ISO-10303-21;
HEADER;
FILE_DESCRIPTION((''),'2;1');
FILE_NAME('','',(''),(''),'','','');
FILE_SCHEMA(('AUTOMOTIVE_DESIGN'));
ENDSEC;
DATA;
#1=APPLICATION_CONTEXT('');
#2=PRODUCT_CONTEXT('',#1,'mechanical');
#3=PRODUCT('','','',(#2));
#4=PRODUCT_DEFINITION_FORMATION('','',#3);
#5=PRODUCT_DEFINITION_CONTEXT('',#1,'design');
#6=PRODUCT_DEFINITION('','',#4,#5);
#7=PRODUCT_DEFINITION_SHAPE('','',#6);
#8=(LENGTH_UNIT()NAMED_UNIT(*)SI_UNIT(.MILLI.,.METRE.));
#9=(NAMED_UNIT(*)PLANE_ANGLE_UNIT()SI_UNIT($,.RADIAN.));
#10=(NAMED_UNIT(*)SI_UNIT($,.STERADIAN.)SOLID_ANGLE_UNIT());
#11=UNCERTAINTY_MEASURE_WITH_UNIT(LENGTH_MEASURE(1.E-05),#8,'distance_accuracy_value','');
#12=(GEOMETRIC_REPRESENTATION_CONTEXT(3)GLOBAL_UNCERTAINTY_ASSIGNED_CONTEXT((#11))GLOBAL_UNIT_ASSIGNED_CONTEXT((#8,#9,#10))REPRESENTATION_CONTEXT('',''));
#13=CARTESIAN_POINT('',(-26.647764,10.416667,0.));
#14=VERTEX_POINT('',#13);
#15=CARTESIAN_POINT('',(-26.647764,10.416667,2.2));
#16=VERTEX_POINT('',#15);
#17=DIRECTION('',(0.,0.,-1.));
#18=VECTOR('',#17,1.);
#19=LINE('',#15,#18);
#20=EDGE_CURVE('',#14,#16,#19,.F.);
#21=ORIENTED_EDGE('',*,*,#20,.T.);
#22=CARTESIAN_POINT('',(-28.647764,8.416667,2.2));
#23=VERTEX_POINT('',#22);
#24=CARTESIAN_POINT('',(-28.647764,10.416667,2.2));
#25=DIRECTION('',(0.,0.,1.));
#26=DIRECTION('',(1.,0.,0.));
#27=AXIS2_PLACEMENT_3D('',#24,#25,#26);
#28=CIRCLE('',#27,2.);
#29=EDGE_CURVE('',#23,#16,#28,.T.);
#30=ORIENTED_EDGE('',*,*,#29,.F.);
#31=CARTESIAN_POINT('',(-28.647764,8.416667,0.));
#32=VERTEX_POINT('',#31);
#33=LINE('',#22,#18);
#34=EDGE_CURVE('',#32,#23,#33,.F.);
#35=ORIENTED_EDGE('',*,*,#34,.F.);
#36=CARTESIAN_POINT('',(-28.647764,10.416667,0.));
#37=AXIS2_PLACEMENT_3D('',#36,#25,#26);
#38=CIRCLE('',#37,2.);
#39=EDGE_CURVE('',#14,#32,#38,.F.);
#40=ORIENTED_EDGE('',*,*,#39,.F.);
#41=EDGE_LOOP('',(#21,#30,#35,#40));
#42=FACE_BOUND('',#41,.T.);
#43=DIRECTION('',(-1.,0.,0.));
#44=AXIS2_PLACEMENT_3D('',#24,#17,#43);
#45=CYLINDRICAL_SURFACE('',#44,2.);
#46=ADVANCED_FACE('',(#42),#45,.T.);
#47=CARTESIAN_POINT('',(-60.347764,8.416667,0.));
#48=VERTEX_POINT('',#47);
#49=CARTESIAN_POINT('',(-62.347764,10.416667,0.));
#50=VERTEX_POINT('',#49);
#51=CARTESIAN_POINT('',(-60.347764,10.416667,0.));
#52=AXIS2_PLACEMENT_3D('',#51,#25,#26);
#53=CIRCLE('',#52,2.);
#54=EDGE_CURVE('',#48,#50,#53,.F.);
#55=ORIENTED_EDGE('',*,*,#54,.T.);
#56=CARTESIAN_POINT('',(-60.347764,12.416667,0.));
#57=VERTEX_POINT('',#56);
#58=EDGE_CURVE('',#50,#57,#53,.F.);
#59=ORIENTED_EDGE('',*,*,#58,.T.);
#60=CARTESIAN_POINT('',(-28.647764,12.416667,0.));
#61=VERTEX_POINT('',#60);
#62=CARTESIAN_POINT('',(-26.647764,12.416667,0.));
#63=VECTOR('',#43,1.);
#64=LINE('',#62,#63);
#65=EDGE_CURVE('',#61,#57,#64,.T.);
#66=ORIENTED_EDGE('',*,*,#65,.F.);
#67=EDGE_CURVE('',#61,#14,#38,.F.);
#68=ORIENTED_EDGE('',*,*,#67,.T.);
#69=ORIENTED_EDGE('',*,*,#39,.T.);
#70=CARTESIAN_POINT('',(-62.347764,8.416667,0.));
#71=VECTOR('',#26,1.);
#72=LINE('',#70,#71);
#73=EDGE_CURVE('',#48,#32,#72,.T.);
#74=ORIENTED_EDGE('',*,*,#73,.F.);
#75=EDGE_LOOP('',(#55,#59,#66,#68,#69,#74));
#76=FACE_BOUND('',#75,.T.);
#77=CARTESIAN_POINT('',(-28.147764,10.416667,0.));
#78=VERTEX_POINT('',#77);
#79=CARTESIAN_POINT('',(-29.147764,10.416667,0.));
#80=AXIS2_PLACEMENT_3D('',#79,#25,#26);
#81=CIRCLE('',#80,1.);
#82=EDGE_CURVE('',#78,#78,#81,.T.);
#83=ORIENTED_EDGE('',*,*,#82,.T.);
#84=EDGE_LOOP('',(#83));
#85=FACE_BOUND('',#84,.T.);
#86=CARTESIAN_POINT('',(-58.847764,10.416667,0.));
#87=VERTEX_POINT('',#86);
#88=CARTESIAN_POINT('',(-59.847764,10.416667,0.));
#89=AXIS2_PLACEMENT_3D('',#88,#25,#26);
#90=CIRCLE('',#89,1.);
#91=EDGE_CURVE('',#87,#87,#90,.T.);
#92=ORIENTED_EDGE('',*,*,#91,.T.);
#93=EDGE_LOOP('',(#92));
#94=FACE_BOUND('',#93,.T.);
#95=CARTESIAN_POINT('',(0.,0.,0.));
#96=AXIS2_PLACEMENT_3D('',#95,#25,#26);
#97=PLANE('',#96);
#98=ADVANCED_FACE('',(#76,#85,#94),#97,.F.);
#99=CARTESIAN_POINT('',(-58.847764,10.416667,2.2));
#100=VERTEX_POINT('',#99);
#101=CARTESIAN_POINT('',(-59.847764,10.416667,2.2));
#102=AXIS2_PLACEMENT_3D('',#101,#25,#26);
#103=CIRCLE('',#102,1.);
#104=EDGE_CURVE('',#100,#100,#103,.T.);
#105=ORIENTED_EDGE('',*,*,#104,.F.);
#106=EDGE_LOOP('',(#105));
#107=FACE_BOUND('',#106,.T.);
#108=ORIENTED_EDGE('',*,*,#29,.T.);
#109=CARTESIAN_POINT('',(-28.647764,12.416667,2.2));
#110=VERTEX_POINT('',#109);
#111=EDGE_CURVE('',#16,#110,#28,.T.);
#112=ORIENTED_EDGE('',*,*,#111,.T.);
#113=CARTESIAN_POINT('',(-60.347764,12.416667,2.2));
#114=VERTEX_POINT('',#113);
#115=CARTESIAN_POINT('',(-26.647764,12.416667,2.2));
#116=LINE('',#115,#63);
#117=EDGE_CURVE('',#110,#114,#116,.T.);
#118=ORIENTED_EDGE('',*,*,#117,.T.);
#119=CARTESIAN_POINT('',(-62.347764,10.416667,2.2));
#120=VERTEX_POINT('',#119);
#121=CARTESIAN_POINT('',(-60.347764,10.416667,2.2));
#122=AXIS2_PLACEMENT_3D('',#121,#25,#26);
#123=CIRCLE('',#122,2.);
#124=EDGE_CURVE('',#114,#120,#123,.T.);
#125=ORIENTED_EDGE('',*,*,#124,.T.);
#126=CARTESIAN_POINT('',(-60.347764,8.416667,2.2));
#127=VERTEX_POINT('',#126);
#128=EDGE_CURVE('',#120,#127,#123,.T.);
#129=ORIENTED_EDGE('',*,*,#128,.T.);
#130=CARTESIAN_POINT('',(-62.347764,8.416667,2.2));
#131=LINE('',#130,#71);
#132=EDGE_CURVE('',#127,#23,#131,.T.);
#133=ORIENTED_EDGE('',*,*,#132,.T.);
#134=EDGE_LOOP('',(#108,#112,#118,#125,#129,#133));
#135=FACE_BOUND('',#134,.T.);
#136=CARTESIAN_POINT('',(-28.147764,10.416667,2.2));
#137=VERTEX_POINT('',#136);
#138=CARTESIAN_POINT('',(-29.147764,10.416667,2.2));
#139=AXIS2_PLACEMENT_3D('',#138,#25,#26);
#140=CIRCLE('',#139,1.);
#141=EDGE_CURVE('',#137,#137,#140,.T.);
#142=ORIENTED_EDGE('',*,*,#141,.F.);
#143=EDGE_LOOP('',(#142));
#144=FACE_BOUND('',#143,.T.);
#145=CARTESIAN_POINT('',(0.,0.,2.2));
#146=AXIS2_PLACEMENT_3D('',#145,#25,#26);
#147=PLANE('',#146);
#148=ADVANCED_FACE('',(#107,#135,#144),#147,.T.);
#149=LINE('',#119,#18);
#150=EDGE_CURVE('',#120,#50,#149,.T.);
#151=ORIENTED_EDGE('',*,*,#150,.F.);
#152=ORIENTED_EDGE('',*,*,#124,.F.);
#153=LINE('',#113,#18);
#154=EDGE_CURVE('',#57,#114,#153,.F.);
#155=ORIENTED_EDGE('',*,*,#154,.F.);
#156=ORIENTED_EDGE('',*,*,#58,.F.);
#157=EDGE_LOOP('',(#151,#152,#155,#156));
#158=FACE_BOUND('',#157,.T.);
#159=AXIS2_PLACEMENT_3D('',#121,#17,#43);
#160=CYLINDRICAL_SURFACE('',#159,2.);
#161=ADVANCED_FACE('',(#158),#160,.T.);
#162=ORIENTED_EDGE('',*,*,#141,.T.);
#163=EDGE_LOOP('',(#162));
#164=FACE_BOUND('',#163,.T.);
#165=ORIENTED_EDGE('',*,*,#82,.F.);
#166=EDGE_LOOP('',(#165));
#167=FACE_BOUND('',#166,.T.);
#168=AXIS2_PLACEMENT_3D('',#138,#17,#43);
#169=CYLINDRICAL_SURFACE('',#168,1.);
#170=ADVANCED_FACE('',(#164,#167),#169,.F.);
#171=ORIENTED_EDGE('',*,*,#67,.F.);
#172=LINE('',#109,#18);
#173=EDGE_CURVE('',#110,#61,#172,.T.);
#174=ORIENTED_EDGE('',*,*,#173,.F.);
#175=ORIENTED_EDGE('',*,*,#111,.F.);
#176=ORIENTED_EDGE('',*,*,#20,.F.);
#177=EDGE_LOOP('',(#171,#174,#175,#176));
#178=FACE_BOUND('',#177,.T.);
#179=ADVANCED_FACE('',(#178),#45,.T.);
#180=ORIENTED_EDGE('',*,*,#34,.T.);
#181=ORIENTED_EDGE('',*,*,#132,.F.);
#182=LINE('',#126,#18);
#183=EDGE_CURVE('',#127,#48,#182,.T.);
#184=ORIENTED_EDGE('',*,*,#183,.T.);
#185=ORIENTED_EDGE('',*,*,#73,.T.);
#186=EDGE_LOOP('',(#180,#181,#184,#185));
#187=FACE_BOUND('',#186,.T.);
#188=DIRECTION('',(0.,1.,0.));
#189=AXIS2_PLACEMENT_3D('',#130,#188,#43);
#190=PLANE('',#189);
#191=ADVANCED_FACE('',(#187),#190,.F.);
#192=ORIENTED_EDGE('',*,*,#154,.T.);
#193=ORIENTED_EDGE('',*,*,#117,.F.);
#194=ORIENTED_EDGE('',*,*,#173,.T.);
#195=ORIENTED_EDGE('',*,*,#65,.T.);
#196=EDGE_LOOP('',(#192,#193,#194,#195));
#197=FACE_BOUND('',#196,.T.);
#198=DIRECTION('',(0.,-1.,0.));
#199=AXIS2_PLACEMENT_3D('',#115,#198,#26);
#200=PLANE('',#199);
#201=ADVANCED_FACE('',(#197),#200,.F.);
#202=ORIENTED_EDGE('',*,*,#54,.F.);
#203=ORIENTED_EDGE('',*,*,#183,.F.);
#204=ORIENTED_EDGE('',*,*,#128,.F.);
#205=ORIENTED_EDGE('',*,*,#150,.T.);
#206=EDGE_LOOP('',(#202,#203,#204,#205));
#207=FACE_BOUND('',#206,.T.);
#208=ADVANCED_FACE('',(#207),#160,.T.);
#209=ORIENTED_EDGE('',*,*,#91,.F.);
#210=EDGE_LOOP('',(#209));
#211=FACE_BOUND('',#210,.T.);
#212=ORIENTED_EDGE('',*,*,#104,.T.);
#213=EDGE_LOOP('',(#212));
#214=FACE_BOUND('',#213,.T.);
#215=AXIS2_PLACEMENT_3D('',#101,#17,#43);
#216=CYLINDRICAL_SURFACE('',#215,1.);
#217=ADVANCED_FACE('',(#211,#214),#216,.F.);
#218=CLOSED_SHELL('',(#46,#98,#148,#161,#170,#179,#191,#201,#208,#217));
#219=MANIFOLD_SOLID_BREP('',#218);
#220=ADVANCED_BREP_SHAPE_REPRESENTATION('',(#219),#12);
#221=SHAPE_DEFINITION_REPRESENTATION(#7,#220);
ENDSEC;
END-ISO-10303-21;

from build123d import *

# Parameters (mm, degrees)
CROQUIS1_W              = 35.7
CROQUIS1_H              = 4
CROQUIS1_R              = 1
SALIENTE_EXTRUIR1_DEPTH = 2.2
REDONDEO1_R             = 2


with BuildPart() as part:
    # Croquis1 → Saliente-Extruir1 (new body)
    with BuildSketch(Plane.XY):
        with Locations((-44.497764467, 10.416666667)):
            Rectangle(CROQUIS1_W, CROQUIS1_H)
        with Locations((-59.847764467, 10.416666667)):
            Circle(CROQUIS1_R, mode=Mode.SUBTRACT)
        with Locations((-29.147764467, 10.416666667)):
            Circle(CROQUIS1_R, mode=Mode.SUBTRACT)
    extrude(amount=SALIENTE_EXTRUIR1_DEPTH)

    # Redondeo1
    redondeo1_edges = [part.edges().sort_by_distance(p)[0] for p in [
        (-62.347764467, 8.416666667, 1.1),
        (-62.347764467, 12.416666667, 1.1),
        (-26.647764467, 8.416666667, 1.1),
        (-26.647764467, 12.416666667, 1.1),
    ]]
    fillet(redondeo1_edges, radius=REDONDEO1_R - 0.0001)  # a hair under: the kernel refuses the full size


solid = part.part
